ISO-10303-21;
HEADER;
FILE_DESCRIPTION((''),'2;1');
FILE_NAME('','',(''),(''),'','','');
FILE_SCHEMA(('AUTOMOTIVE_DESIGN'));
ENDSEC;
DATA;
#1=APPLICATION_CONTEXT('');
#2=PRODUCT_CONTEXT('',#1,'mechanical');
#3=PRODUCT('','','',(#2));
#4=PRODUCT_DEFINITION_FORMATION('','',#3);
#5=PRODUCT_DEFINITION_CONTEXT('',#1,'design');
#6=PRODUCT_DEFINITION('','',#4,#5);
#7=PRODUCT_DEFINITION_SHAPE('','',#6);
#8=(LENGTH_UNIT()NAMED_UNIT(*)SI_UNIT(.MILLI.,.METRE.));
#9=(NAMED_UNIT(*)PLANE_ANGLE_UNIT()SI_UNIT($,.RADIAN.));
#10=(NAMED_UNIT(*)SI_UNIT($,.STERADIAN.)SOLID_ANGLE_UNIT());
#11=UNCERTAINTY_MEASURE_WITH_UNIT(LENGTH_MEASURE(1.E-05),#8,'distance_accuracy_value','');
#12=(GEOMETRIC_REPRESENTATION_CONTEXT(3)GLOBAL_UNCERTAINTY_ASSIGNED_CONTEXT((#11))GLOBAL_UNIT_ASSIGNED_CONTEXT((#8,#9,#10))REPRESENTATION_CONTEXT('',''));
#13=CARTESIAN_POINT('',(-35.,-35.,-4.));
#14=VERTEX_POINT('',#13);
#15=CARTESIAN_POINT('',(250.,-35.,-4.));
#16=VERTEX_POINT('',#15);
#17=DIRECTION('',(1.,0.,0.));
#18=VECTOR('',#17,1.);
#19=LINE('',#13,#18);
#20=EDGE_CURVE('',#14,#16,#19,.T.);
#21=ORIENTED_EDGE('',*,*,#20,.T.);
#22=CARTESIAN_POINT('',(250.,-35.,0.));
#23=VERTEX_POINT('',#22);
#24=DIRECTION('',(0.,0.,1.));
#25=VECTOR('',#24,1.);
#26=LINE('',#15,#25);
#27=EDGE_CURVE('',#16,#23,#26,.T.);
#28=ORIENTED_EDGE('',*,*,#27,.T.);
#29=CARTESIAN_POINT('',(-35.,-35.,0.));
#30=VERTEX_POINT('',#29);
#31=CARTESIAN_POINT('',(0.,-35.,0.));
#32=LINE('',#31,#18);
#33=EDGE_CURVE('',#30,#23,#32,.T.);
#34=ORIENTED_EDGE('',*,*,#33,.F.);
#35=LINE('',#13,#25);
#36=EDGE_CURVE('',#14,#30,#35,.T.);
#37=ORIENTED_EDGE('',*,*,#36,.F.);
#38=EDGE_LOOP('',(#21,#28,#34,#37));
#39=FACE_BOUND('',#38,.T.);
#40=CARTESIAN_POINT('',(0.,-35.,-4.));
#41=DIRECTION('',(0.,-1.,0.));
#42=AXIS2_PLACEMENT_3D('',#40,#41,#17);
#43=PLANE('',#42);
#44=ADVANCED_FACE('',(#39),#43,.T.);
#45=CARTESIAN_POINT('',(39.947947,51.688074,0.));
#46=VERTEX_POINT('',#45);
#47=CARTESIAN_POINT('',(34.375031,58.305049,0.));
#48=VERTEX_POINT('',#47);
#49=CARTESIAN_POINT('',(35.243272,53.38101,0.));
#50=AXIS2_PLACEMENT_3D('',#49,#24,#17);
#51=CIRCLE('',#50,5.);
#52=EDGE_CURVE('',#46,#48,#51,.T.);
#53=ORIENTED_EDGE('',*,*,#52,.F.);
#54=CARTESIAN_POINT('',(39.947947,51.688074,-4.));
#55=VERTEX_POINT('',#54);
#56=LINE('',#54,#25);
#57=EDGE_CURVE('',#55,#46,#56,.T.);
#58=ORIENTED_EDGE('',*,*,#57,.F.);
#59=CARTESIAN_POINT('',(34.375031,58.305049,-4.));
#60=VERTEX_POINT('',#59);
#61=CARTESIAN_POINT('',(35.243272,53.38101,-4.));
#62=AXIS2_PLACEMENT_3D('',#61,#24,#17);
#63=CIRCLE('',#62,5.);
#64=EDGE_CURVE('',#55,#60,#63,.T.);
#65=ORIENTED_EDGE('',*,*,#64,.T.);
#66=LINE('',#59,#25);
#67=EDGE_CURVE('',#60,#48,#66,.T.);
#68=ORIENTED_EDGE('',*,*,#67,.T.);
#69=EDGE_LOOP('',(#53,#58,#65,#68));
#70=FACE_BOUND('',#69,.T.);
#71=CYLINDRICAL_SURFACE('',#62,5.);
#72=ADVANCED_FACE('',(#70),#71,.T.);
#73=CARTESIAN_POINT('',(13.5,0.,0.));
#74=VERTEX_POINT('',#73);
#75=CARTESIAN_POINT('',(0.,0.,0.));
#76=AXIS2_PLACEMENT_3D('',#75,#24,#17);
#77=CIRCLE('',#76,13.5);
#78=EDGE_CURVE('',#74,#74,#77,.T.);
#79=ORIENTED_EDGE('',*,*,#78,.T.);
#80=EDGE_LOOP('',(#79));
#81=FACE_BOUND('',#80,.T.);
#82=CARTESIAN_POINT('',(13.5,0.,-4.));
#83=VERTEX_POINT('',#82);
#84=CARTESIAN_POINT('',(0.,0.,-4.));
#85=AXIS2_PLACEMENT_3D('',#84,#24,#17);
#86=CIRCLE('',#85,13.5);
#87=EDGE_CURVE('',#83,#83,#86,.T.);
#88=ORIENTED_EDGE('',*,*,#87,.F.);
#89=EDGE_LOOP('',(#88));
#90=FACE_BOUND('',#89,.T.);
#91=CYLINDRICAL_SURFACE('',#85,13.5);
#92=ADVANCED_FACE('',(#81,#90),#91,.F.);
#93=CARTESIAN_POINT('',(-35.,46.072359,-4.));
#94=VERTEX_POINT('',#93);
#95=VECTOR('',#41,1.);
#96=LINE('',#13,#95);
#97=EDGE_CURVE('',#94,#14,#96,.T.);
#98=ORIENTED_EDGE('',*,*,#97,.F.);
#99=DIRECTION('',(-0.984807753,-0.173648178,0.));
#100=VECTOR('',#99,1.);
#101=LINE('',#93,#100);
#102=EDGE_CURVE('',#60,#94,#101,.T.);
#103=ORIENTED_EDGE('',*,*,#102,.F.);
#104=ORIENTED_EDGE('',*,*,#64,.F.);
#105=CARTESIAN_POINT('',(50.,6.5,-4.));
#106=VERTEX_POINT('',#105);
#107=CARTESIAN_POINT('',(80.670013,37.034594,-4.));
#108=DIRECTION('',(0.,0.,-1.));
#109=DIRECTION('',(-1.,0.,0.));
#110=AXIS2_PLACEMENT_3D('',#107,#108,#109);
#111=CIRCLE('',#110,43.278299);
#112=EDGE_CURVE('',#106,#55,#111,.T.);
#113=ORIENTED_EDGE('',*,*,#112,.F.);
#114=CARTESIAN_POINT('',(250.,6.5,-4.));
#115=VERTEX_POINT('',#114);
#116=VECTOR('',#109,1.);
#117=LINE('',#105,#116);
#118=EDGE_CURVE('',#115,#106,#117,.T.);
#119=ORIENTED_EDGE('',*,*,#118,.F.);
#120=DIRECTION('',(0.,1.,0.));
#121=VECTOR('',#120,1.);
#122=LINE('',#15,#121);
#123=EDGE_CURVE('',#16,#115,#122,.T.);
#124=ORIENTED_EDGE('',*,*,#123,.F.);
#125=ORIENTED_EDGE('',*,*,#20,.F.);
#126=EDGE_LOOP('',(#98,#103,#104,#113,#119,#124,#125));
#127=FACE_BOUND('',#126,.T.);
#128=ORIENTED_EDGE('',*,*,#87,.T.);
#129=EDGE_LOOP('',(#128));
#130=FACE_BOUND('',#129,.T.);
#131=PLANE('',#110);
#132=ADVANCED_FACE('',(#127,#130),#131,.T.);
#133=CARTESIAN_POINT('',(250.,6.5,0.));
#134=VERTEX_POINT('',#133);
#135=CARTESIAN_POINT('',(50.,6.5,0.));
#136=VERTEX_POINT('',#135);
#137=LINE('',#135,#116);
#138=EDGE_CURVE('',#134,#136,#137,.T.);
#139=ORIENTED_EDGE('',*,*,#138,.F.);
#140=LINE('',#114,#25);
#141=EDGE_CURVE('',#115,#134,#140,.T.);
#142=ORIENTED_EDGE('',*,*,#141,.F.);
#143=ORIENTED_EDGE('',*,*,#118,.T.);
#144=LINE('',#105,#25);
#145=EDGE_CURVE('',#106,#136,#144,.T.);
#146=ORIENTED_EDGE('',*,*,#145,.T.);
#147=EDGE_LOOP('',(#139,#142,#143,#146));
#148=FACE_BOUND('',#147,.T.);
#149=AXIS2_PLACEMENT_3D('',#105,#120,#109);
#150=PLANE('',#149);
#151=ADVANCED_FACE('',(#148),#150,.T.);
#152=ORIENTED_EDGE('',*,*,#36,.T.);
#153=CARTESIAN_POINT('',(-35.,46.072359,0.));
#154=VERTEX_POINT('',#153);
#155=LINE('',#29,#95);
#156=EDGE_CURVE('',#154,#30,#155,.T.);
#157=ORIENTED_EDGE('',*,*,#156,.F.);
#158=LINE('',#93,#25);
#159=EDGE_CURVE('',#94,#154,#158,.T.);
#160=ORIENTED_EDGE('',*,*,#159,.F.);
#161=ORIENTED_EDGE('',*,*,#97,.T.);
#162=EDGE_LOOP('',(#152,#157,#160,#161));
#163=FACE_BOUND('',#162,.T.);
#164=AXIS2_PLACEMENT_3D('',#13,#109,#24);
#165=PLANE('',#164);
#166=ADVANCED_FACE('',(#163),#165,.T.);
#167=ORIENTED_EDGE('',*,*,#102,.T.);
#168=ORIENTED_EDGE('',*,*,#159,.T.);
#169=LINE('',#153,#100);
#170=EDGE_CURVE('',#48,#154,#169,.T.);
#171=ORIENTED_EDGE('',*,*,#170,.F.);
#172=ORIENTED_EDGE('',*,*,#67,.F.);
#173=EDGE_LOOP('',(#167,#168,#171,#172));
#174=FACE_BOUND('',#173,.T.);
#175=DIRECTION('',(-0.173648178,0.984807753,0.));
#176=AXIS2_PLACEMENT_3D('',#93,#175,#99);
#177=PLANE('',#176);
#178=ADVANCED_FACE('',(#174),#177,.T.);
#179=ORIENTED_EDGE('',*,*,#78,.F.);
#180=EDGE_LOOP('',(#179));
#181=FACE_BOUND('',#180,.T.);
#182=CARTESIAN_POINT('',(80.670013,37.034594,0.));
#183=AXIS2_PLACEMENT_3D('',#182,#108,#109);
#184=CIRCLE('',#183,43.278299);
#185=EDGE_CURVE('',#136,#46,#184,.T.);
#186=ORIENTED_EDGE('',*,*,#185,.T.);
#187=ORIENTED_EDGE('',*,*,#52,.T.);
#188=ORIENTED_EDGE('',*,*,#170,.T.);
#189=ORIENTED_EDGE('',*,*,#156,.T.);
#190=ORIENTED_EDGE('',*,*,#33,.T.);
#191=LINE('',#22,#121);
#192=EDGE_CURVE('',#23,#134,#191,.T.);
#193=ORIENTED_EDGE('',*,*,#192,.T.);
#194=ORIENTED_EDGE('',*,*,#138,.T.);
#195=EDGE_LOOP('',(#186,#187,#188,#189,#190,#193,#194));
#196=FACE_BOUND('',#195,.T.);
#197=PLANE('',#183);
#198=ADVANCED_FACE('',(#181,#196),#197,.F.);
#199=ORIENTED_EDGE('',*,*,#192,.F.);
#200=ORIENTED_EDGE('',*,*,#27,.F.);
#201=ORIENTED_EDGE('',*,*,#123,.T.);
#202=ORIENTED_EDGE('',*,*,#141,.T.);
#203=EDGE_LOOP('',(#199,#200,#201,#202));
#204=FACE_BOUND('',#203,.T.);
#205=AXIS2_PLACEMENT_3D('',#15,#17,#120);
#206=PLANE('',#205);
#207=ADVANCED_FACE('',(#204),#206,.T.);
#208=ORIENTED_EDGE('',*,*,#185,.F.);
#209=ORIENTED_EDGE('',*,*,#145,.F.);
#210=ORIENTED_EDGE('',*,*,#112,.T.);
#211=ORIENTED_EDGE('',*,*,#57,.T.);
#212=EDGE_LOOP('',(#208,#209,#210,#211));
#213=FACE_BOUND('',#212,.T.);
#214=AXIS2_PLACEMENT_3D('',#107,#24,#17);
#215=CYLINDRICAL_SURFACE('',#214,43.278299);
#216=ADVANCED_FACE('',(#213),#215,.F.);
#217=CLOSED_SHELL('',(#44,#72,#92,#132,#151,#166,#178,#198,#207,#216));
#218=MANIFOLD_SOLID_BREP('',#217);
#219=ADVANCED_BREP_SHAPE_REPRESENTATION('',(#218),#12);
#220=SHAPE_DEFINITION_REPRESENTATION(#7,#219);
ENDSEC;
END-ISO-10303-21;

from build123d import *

# Parameters (mm, degrees)
SKETCH_1_R             = 13.5
SM_BASE_FLANGE_1_DEPTH = 4


# Sheet-metal steps are written as plain solids
with BuildPart() as part:
    # Sketch 1 → Базовая кромка1 (new body)
    with BuildSketch(Plane.XY):
        with BuildLine():
            Line((0, -35), (250, -35))
            Line((250, -35), (250, 6.5))
            Line((250, 6.5), (50, 6.5))
            ThreePointArc((50, 6.5), (38.424329978, 27.637073819), (39.947947324, 51.688074136))
            ThreePointArc((39.947947324, 51.688074136), (39.067621468, 56.60193476), (34.375031444, 58.305049172))
            Line((34.375031444, 58.305049172), (-35, 46.072359341))
            Line((-35, 46.072359341), (-35, -35))
            Line((-35, -35), (0, -35))
        make_face()
        Circle(SKETCH_1_R, mode=Mode.SUBTRACT)
    extrude(amount=-SM_BASE_FLANGE_1_DEPTH)


solid = part.part
